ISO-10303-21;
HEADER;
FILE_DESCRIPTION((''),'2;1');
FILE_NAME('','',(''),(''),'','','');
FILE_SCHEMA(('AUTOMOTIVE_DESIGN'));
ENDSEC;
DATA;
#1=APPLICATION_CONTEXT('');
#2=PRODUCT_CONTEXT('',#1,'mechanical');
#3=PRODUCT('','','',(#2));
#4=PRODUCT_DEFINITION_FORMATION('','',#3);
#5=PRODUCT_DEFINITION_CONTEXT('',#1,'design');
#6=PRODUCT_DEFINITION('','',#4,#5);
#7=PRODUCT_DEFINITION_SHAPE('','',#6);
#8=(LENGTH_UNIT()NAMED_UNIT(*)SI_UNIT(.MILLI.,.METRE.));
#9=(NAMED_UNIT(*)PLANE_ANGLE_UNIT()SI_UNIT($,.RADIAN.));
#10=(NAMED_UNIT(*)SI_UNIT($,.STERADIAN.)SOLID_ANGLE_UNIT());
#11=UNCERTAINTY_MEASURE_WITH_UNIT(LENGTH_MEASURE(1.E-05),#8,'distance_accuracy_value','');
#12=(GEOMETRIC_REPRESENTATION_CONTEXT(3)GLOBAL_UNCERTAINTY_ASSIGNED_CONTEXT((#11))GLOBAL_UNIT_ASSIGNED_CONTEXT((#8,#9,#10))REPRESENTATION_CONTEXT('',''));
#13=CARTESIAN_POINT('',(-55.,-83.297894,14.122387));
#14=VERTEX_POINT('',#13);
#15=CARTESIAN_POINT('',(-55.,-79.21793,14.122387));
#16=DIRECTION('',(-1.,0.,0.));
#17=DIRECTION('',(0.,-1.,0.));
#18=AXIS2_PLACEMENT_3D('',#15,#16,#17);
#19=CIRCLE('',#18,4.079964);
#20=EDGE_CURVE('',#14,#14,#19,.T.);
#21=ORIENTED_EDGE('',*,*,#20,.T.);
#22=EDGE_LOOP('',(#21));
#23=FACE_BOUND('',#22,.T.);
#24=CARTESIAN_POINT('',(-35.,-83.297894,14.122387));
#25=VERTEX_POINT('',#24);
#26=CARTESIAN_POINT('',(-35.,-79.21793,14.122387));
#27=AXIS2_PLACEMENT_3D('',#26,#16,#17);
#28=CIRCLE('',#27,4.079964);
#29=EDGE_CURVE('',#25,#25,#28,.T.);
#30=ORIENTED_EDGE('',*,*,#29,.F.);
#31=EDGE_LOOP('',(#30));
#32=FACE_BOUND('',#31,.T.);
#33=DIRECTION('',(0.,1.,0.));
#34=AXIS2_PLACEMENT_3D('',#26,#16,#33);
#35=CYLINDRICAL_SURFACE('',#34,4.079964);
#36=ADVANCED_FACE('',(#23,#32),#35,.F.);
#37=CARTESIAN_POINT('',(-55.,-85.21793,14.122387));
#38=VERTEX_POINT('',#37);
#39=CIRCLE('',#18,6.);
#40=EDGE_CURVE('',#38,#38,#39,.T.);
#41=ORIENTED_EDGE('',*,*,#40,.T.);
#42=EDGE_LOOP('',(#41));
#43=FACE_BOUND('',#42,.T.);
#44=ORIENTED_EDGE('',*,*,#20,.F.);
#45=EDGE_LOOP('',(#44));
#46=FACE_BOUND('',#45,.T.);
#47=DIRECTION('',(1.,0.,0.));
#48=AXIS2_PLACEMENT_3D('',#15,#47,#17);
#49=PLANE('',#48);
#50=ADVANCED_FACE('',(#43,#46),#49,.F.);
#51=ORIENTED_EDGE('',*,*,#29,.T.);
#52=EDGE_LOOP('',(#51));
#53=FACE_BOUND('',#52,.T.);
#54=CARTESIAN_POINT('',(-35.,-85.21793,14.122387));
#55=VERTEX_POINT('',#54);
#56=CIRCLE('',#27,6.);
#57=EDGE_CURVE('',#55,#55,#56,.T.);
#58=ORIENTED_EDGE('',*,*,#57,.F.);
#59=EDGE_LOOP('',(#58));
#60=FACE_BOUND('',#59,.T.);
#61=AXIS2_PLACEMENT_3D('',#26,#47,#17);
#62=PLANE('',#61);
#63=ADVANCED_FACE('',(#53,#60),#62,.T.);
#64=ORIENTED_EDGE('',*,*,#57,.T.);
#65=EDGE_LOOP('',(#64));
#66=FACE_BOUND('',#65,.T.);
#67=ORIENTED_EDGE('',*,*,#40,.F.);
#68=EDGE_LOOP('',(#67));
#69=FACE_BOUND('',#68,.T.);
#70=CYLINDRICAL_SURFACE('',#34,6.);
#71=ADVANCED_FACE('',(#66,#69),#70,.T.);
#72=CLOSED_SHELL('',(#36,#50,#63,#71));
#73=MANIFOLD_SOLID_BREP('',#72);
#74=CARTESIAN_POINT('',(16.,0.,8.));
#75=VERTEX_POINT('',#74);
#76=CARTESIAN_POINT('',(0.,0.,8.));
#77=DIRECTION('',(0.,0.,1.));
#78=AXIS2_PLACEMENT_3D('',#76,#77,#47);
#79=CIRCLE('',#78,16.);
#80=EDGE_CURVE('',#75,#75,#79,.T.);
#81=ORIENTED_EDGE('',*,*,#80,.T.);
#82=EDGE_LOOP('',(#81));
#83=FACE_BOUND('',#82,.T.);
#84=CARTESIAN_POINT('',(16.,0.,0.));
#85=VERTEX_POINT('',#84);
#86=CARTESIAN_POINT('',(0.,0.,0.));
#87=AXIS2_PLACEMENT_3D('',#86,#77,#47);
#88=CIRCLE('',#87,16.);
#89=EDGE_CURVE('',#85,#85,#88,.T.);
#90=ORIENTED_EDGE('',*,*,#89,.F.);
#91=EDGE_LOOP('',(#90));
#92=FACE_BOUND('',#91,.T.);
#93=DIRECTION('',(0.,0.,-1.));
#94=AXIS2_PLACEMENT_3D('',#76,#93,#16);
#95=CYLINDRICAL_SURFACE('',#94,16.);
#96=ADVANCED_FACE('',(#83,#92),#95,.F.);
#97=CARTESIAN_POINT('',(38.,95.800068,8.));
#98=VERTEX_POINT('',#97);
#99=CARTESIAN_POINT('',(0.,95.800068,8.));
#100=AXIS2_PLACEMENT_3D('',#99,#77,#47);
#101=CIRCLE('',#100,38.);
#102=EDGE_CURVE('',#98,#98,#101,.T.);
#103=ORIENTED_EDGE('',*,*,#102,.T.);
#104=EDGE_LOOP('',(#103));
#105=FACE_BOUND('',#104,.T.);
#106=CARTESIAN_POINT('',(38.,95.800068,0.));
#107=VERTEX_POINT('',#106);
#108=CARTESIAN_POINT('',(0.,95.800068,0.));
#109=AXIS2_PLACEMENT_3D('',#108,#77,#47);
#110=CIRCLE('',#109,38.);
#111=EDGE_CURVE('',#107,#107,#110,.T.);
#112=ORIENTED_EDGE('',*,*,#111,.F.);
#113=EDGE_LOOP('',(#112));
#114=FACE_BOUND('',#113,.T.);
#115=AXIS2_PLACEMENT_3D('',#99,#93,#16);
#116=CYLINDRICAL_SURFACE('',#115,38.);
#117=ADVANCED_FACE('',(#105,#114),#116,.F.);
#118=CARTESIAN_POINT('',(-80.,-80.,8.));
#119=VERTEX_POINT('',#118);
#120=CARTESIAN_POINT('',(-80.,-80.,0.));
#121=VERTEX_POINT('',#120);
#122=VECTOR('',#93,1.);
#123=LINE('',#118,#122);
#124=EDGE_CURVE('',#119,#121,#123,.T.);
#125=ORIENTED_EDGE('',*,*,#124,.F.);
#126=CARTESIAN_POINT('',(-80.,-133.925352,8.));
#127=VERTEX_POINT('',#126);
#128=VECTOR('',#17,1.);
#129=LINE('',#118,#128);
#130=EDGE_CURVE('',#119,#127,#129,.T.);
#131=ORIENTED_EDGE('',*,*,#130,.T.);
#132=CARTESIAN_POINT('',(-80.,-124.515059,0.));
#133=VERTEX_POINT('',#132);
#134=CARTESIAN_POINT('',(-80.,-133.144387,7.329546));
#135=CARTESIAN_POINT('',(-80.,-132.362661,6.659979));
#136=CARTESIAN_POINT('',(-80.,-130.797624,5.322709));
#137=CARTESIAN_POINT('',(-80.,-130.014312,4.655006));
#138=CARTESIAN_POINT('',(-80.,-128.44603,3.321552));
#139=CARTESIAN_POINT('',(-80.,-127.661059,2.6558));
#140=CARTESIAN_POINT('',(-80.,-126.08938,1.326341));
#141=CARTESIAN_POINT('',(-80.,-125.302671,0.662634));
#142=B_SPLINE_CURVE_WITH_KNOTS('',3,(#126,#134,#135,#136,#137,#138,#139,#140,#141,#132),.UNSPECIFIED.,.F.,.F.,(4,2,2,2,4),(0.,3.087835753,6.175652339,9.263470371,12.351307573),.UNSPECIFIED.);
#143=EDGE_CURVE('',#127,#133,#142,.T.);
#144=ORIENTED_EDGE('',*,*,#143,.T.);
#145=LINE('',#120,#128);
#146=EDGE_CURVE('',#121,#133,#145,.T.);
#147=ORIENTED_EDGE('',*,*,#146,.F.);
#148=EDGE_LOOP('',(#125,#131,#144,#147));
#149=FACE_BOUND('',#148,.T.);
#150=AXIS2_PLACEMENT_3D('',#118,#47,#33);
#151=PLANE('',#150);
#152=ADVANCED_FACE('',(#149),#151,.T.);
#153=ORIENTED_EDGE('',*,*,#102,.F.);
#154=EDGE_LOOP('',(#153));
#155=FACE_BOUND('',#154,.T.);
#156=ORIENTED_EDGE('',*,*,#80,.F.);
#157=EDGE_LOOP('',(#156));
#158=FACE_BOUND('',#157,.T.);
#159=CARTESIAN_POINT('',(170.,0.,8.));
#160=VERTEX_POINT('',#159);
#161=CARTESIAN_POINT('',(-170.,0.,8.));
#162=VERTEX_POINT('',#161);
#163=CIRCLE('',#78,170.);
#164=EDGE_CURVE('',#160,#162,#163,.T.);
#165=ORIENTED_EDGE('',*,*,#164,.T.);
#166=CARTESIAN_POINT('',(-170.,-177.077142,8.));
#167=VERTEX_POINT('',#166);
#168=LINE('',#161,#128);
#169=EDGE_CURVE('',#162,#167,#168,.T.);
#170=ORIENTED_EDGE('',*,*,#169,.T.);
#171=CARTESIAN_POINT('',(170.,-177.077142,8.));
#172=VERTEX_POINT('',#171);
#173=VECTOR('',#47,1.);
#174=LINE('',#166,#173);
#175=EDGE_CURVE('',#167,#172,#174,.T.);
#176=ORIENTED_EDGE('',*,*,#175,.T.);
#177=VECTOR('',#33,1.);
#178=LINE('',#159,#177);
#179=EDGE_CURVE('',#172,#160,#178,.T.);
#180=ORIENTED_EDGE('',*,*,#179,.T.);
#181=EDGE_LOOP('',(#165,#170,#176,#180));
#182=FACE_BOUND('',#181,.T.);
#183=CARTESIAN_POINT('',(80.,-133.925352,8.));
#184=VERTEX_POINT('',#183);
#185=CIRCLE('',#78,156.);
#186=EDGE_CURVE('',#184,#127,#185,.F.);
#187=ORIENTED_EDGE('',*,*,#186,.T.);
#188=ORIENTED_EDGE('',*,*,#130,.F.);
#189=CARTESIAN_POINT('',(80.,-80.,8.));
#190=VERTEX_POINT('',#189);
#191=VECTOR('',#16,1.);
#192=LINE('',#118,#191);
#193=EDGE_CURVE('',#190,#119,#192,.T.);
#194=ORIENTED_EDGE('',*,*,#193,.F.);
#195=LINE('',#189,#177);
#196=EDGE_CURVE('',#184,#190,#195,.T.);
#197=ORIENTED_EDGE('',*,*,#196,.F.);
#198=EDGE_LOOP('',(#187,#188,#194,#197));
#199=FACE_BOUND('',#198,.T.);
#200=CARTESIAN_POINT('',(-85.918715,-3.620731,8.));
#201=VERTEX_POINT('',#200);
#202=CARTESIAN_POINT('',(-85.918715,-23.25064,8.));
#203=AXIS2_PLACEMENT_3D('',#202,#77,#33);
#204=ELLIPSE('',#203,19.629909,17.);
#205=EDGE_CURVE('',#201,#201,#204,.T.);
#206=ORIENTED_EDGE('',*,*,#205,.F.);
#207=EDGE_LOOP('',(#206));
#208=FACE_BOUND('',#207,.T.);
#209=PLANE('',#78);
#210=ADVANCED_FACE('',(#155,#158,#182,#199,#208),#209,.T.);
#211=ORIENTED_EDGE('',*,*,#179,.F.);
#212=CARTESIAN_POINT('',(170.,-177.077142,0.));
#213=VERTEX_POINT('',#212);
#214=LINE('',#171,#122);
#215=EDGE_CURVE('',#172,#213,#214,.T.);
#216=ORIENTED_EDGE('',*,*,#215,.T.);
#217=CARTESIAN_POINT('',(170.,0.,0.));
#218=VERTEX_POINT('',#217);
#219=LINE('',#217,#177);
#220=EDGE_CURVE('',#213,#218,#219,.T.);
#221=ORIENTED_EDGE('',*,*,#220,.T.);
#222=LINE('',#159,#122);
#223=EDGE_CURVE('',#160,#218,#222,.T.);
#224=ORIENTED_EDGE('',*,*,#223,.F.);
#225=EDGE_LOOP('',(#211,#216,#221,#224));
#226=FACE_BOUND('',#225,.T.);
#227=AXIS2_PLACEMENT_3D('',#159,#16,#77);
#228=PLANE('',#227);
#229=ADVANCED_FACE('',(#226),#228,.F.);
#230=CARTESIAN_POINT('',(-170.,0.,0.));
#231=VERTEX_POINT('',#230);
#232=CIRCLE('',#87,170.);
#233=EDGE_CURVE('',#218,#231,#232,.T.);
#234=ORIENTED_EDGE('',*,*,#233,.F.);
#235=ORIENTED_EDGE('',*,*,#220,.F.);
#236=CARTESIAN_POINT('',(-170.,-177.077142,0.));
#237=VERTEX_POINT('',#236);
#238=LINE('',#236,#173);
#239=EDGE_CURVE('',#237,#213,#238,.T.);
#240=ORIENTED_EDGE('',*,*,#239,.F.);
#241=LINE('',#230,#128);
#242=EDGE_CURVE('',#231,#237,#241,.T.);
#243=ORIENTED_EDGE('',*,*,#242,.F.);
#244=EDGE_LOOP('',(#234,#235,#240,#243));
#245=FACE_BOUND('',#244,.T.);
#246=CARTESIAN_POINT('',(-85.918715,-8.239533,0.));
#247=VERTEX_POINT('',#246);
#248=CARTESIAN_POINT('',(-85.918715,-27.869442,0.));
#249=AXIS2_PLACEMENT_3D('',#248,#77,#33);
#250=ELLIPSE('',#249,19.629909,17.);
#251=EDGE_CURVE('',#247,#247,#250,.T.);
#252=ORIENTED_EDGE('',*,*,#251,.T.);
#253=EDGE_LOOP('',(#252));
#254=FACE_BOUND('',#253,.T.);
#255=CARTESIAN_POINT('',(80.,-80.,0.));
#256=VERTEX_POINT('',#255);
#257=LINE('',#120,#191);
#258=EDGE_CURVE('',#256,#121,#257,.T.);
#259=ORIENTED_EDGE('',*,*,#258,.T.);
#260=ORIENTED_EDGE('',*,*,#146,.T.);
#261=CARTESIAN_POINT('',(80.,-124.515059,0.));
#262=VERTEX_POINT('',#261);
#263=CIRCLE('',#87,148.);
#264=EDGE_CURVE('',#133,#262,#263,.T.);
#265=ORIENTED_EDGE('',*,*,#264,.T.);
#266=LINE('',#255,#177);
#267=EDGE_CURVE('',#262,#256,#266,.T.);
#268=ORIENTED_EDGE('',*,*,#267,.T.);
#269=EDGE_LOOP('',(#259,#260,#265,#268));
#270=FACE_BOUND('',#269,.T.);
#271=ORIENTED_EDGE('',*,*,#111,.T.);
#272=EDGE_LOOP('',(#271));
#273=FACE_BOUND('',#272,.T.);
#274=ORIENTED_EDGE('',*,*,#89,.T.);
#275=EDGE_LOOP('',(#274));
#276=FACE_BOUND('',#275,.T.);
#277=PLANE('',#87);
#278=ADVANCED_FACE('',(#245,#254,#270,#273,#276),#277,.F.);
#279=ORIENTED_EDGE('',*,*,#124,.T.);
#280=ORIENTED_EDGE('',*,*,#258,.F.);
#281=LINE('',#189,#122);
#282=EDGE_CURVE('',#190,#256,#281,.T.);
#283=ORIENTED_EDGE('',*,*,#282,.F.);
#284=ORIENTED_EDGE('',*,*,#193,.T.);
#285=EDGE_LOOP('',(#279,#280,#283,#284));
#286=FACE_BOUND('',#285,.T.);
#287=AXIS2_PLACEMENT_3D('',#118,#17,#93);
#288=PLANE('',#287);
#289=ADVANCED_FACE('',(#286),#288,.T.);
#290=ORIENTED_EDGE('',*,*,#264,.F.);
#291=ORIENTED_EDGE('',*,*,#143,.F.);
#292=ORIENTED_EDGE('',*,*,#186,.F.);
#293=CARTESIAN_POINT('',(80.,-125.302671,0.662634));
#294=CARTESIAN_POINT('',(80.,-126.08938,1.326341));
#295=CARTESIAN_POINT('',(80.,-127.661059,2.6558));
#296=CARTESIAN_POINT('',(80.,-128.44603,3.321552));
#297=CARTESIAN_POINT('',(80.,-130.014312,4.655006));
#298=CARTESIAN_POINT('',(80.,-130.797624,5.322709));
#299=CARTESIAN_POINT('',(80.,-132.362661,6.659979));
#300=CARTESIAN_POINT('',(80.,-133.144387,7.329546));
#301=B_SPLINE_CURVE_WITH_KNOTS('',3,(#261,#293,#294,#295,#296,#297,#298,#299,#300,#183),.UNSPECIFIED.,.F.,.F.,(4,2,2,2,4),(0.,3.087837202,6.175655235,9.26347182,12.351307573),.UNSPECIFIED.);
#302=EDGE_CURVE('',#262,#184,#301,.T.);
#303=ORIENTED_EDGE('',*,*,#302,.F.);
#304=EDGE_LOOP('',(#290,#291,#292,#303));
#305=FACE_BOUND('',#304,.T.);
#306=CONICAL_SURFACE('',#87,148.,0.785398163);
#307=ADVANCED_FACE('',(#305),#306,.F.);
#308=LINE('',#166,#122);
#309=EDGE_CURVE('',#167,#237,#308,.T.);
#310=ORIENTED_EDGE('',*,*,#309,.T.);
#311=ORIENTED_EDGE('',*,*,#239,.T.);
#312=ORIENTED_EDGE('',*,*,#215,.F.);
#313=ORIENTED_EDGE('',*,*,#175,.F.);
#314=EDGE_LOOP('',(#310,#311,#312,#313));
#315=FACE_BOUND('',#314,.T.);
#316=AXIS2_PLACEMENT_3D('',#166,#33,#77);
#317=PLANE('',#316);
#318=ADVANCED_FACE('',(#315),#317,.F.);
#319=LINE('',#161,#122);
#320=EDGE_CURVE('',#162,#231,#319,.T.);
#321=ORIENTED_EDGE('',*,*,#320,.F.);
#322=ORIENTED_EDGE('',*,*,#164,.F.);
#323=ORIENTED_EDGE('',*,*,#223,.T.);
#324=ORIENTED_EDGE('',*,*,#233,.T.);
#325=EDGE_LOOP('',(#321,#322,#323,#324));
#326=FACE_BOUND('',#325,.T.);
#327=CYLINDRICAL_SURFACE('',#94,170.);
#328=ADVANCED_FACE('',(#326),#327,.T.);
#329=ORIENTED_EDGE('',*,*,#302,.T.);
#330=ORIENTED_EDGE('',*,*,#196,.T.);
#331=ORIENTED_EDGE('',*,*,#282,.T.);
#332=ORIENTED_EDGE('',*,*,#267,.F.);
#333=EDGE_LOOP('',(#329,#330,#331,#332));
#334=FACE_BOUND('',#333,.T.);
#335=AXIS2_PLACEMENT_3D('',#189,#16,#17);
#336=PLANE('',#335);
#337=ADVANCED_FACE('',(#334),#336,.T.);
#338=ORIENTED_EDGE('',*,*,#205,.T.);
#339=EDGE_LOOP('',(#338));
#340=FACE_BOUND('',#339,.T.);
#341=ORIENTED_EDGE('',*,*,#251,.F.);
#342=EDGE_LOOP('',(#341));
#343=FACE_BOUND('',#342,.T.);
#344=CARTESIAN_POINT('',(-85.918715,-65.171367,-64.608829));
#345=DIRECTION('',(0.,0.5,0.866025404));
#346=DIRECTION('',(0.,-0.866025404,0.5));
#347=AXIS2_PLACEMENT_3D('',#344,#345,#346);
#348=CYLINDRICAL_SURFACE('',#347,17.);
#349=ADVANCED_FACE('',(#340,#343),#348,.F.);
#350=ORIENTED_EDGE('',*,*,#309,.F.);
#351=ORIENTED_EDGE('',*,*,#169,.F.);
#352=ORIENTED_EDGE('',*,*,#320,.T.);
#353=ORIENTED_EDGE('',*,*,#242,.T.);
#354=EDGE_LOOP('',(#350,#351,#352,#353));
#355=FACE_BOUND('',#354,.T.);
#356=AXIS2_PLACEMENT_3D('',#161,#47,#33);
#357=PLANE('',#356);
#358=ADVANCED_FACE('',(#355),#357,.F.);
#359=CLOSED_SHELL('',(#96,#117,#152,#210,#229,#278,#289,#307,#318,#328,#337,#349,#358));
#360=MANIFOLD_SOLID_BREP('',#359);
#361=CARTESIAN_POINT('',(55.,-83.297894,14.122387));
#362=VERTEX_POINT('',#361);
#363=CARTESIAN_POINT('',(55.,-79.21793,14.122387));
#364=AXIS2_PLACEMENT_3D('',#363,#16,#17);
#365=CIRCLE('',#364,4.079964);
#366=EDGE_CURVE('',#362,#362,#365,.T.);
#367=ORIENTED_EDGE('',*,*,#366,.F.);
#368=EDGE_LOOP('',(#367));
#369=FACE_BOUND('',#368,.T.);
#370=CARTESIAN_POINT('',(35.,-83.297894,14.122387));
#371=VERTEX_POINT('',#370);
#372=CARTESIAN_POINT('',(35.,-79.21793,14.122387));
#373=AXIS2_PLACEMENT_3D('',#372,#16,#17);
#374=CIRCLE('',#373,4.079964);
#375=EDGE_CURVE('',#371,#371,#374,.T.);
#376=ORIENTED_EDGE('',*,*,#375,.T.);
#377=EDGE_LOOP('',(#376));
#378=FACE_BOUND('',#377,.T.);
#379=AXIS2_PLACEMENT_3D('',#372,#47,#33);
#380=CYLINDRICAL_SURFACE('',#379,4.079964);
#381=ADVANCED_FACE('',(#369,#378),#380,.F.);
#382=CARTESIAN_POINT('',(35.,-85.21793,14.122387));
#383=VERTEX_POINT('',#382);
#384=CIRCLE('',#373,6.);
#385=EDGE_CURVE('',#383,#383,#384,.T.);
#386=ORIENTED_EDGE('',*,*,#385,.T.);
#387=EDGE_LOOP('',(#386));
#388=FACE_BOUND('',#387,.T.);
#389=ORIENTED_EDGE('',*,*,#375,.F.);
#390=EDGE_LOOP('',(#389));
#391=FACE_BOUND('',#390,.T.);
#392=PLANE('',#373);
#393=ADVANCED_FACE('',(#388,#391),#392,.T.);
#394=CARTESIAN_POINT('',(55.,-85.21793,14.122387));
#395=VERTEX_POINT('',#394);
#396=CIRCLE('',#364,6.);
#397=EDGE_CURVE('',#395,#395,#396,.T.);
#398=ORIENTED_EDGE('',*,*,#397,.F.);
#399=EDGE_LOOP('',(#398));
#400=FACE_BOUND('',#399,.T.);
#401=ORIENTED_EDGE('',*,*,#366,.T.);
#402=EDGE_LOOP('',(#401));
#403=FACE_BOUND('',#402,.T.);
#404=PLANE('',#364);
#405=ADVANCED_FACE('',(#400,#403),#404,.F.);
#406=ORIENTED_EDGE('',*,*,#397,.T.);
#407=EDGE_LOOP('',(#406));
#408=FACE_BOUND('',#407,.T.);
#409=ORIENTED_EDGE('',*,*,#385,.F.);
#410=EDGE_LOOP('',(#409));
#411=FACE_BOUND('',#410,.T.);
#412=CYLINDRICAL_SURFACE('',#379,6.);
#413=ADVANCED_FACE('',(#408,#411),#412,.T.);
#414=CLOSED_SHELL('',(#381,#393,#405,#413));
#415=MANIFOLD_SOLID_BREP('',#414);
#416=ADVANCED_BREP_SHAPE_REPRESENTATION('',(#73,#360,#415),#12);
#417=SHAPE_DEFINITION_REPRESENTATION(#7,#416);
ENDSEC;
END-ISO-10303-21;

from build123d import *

# Parameters (mm, degrees)
SKETCH1_R               = 16
SKETCH1_R_2             = 38
SKETCH1_R_3             = 10
BOSS_EXTRUDE1_DEPTH     = 8
CHAMFER1_SIZE           = 8
CUT_EXTRUDE1_DEPTH      = 245.081359787
CUT_EXTRUDE1_DEPTH_BACK = 245.081359787
SKETCH3_R               = 17
SKETCH4_R               = 6
SKETCH4_R_2             = 4.079964081
BOSS_EXTRUDE2_DEPTH     = 20


with BuildPart() as part:
    # Sketch1 → Boss-Extrude1 (new body)
    with BuildSketch(Plane.XY):
        with BuildLine():
            Line((170, 0), (170, -177.077141788))
            Line((170, -177.077141788), (-170, -177.077141788))
            Line((-170, -177.077141788), (-170, 0))
            ThreePointArc((-170, 0), (0, 170), (170, 0))
        make_face()
        Circle(SKETCH1_R, mode=Mode.SUBTRACT)
        with Locations((0, 95.800068301)):
            Circle(SKETCH1_R_2, mode=Mode.SUBTRACT)
        with Locations((-85.918714518, -23.250640016)):
            Circle(SKETCH1_R_3, mode=Mode.SUBTRACT)
        with BuildLine():
            Line((-80, -80), (-80, -124.51505933))
            ThreePointArc((-80, -124.51505933), (0, -148), (80, -124.51505933))
            Line((80, -124.51505933), (80, -80))
            Line((80, -80), (-80, -80))
        make_face(mode=Mode.SUBTRACT)
    extrude(amount=BOSS_EXTRUDE1_DEPTH)

    # Chamfer1
    chamfer1_edges = [part.edges().sort_by_distance(p)[0] for p in [
        (0, -148, 8),
    ]]
    chamfer(chamfer1_edges, length=CHAMFER1_SIZE - 0.0001)  # a hair under: the kernel refuses the full size

    # Sketch3 → Cut-Extrude1 (cut, two sides: drawn at the far end of the back side and taken through both)
    with BuildSketch(Plane(origin=(0, -2.348558389, -4.067822454), x_dir=(-1, 0, 0), z_dir=(0, 0.500000000000001, 0.866025403784438)).offset(-CUT_EXTRUDE1_DEPTH_BACK)):
        with Locations(Location((85.918714518, 24.135644908, 0), (0, 0, 270))):
            Circle(SKETCH3_R)
    extrude(amount=CUT_EXTRUDE1_DEPTH + CUT_EXTRUDE1_DEPTH_BACK, mode=Mode.SUBTRACT)


with BuildPart() as body_2:
    # Sketch4 → Boss-Extrude2 (new body)
    with BuildSketch(Plane.ZY.offset(-55)):
        with Locations(Location((14.122386973, -79.217930226, 0), (0, 0, 270))):
            Circle(SKETCH4_R)
        with Locations(Location((14.122386973, -79.217930226, 0), (0, 0, 270))):
            Circle(SKETCH4_R_2, mode=Mode.SUBTRACT)
    extrude(amount=BOSS_EXTRUDE2_DEPTH)


with BuildPart() as body_3:
    # Mirror2: mirrored copy
    add(body_2.part.mirror(Plane(origin=(0, 0, 0), x_dir=(0, 0, 1), z_dir=(1, 0, 0))))


solid = Compound([part.part, body_2.part, body_3.part])
